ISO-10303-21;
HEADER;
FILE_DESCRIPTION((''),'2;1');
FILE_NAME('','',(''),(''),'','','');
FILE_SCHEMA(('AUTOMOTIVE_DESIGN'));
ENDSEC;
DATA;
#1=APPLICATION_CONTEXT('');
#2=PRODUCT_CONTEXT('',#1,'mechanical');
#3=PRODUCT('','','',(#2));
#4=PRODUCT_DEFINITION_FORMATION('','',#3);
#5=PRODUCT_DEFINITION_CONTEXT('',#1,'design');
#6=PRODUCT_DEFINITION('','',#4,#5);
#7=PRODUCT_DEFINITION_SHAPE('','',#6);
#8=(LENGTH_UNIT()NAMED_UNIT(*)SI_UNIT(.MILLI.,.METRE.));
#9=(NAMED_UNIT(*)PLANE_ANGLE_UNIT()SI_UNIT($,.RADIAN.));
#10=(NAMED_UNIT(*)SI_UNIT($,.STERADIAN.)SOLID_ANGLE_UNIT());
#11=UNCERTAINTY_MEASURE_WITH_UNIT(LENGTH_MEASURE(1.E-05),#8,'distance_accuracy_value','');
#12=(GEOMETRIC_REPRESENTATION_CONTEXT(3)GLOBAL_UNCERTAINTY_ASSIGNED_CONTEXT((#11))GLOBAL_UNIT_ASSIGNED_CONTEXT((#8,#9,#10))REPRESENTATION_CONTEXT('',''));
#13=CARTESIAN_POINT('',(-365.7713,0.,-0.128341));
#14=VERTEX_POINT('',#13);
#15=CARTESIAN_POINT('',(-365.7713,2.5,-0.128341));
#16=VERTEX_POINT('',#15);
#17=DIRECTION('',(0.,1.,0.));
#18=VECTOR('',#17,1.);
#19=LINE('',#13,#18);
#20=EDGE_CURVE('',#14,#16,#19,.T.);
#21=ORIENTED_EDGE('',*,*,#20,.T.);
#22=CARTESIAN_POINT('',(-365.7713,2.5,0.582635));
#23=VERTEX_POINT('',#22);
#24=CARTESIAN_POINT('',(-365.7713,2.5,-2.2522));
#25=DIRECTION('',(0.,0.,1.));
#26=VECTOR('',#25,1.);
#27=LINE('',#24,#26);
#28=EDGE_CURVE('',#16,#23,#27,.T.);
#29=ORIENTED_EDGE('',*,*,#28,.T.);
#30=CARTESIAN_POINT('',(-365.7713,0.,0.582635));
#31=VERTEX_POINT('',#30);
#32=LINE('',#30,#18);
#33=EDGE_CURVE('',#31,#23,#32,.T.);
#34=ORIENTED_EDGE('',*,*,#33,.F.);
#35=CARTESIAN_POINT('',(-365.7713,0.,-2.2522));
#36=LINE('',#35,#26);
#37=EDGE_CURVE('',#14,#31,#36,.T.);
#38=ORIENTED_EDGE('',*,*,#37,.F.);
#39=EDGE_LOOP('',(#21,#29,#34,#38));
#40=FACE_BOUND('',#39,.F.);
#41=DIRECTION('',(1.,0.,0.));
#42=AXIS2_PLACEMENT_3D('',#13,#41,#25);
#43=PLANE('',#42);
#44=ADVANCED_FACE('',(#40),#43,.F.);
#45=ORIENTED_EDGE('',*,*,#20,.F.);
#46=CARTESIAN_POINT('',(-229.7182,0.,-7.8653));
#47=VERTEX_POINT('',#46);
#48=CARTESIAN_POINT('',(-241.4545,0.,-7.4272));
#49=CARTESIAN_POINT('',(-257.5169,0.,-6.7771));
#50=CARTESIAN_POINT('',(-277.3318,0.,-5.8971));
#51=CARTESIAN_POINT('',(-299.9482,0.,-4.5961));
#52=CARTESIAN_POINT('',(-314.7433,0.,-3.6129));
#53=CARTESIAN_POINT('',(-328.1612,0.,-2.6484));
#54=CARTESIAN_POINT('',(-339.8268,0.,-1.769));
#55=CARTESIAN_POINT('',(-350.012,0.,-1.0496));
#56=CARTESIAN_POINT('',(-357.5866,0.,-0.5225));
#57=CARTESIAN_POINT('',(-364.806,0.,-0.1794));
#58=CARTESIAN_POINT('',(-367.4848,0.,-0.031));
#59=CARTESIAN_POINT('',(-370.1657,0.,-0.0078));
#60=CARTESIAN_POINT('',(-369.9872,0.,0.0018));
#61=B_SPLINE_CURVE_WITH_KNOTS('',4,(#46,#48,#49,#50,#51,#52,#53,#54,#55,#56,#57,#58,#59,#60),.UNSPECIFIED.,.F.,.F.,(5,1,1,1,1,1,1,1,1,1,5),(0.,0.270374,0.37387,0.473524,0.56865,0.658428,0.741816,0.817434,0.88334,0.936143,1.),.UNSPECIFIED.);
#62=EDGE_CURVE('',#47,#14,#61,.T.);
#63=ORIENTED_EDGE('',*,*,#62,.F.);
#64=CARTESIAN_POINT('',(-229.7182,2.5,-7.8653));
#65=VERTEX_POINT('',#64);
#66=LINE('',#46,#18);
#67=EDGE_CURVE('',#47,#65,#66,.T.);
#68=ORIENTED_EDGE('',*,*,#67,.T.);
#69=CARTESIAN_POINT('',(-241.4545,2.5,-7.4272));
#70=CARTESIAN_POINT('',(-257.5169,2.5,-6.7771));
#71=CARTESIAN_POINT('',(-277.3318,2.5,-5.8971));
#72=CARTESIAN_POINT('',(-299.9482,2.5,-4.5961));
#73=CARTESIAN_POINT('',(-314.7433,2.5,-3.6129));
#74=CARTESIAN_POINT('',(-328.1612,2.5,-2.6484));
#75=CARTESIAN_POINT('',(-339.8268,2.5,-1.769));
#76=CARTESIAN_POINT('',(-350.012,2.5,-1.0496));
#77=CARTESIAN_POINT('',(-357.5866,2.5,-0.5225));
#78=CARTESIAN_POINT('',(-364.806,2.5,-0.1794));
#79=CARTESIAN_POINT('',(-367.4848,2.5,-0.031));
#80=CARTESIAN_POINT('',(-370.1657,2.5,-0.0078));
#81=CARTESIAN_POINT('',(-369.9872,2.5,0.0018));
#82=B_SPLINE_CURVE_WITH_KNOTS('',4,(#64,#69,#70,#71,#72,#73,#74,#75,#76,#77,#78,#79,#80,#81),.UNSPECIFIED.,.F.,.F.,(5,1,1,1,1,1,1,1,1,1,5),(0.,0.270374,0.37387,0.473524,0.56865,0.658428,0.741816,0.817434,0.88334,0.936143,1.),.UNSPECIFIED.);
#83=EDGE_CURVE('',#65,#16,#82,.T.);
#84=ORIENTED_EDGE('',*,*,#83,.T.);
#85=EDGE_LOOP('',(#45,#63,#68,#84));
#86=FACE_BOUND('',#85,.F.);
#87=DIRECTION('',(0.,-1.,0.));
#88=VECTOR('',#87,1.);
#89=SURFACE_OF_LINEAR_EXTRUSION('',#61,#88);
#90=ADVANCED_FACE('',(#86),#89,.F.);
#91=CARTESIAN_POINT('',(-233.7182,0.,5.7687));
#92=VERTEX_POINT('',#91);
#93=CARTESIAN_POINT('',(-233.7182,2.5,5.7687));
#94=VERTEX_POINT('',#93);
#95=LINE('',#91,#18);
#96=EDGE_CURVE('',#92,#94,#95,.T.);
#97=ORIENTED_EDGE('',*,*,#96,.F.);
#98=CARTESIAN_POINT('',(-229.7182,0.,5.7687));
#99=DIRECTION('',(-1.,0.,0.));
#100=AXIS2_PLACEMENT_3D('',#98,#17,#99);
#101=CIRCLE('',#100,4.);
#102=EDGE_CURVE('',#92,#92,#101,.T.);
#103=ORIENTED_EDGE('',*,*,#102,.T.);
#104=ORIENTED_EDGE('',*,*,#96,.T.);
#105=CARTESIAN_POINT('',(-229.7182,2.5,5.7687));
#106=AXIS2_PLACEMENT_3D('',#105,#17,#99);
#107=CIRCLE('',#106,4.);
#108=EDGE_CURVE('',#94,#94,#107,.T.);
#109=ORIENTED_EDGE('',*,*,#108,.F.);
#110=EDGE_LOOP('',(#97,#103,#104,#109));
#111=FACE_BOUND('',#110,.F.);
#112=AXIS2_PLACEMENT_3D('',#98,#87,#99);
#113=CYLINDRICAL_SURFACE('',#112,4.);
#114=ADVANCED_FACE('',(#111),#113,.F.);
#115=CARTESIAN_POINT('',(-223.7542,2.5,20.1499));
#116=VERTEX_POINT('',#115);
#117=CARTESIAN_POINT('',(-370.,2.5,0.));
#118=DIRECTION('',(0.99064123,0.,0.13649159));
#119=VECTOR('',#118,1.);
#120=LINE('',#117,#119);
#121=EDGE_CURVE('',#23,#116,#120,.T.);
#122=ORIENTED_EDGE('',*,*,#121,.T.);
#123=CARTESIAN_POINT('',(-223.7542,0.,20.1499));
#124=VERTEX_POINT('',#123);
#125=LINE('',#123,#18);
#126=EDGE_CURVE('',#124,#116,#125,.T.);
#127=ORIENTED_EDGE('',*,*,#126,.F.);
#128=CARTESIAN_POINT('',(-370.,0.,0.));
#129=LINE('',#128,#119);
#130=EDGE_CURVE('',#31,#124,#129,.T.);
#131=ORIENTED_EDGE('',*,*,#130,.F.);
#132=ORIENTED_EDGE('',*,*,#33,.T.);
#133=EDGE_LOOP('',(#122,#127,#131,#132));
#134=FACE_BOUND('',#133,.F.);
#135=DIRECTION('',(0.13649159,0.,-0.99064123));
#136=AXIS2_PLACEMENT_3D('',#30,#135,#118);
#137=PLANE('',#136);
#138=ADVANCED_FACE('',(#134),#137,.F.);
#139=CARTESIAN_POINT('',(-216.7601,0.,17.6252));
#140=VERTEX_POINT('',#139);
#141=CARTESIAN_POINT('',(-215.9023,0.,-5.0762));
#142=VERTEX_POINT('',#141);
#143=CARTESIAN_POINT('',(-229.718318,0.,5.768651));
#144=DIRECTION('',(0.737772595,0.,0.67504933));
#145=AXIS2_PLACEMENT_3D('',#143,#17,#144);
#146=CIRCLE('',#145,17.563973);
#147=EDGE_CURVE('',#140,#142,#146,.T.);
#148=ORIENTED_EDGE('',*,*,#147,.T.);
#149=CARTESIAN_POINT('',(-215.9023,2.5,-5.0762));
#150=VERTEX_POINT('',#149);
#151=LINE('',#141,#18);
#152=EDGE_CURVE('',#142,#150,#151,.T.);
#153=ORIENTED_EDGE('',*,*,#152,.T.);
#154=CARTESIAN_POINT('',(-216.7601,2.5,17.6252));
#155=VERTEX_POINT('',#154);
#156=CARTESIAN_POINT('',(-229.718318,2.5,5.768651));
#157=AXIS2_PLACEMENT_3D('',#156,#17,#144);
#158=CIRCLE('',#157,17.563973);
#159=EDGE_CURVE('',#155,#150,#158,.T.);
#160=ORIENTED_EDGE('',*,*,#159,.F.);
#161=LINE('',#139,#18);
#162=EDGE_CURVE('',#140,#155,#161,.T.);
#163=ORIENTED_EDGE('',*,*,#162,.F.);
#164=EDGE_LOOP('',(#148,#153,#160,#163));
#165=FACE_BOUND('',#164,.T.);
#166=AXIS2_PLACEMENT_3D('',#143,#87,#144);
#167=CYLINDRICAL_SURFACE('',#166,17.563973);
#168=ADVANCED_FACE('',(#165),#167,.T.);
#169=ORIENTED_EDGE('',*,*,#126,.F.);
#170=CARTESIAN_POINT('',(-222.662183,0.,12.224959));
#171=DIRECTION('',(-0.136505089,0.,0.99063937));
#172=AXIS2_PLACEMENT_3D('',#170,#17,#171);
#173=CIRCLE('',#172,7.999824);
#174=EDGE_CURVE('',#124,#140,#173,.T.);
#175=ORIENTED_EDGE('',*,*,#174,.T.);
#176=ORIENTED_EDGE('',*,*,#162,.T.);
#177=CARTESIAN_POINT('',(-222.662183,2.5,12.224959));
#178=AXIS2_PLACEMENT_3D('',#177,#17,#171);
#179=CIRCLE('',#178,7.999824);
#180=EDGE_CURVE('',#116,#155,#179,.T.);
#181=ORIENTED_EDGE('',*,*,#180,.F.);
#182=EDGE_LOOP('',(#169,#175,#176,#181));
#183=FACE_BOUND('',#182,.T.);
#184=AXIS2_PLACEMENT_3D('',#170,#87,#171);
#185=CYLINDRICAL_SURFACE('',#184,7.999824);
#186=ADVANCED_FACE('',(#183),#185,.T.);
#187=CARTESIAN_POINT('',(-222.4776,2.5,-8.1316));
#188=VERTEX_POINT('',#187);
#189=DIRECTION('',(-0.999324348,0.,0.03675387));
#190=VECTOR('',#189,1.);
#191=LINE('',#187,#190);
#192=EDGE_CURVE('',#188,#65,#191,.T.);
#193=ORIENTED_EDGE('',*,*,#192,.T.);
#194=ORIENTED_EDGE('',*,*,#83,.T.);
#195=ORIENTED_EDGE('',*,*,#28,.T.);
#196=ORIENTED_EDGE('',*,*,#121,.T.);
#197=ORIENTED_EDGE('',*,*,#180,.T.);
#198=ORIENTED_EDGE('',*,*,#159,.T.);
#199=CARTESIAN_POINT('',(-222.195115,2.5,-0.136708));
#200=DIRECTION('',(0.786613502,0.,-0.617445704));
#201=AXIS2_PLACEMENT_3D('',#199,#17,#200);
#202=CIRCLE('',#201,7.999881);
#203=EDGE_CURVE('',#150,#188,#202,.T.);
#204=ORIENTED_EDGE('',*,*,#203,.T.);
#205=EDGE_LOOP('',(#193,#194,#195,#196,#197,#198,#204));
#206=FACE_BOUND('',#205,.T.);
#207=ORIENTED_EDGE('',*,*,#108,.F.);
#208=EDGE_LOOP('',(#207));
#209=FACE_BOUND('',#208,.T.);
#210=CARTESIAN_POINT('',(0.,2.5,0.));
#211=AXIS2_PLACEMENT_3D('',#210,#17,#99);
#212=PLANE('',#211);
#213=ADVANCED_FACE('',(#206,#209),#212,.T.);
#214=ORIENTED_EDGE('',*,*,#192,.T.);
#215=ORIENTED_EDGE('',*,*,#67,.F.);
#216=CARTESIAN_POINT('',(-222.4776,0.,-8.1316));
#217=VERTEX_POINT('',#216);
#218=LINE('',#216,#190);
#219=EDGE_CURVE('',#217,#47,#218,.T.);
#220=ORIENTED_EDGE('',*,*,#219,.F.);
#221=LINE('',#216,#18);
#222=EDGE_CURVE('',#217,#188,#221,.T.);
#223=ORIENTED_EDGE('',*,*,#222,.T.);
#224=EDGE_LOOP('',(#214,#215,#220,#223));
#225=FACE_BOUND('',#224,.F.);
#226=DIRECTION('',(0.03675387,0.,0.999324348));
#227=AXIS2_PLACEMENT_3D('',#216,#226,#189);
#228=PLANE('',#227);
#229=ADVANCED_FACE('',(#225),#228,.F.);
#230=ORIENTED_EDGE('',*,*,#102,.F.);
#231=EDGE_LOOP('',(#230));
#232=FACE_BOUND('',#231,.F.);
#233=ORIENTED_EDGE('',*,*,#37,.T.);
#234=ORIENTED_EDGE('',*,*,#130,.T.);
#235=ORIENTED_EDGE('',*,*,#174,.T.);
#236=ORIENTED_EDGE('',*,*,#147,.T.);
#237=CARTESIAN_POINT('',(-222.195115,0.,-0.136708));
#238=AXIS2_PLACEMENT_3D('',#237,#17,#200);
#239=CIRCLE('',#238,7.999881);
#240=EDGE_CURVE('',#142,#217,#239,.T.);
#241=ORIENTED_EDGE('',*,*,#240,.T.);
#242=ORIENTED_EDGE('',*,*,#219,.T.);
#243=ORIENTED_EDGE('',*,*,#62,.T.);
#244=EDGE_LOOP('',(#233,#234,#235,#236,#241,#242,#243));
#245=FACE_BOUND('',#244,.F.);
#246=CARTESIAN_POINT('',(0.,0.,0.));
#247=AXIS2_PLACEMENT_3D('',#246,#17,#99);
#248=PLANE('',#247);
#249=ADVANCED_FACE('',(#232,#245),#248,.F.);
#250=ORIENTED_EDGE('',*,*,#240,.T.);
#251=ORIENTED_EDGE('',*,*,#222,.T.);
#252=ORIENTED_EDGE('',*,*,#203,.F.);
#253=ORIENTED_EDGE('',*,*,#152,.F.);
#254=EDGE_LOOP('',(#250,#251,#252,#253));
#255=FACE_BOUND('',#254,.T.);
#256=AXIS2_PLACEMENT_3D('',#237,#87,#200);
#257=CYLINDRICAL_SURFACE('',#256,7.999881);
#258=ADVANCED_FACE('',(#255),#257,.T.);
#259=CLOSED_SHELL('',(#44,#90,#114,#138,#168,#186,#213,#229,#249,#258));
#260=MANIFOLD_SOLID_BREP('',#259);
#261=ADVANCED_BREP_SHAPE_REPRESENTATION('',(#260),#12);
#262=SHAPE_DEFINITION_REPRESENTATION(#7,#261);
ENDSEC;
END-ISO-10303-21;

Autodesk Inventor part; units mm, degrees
ref_plane "YZ Plane" through (0, 0, 0) normal (1, 0, 0) x (0, 1, 0)
ref_plane "XZ Plane" through (0, 0, 0) normal (0, 1, 0) x (-1, 0, 0)
ref_plane "XY Plane" through (0, 0, 0) normal (0, 0, 1) x (1, 0, 0)
sketch "Sketch1" plane through (0, 0, 0) normal (0, 1, 0) x (-1, 0, 0)
  arc A0 (210.1622, -7.2025) -> (309.6615, 148.1866) centre (370, 0) ccw construction
  line L0 (370, 0) -> (223.7542, 20.1499)
  circle A1 centre (211.4974, 21.8387) radius 160 construction
  circle A2 centre (369.9872, 0.0018) radius 3 construction
  line L1 (365.7713, 2.7478) -> (370.7713, 2.7478)
  line L2 (370.7713, 2.7478) -> (370.7713, -2.2522)
  line L3 (370.7713, -2.2522) -> (365.7713, -2.2522)
  line L4 (365.7713, -2.2522) -> (365.7713, 2.7478)
  arc A3 (216.7601, 17.6252) -> (215.9023, -5.0762) centre (229.7182, 5.7687) ccw
  circle A4 centre (229.7182, 5.7687) radius 11.5
  circle A5 centre (229.7182, 5.7687) radius 4
  spline S0 degree 4 poles (229.7182, -7.8653) (241.4545, -7.4272) (257.5169, -6.7771) (277.3318, -5.8971) (299.9482, -4.5961) (314.7433, -3.6129) (328.1612, -2.6484) (339.8268, -1.769) (350.012, -1.0496) (357.5866, -0.5225) (364.806, -0.1794) (367.4848, -0.031) (370.1657, -0.0078) (369.9872, 0.0018) knots 0 0 0 0 0 0.270374 0.37387 0.473524 0.56865 0.658428 0.741816 0.817434 0.88334 0.936143 1 1 1 1 1
  arc A6 (223.7542, 20.1499) -> (216.7601, 17.6252) centre (222.6622, 12.2248) ccw
  arc A7 (215.9023, -5.0762) -> (222.4776, -8.1316) centre (222.1952, -0.1366) ccw
  line L5 (222.4776, -8.1316) -> (229.7182, -7.8653)
  point P0 (370, 0)
  point P1 (210.0997, -8.5616)
  point P2 (267.1071, -6.3194)
  point P3 (284.4371, -5.4606)
  point P4 (300.619, -4.5258)
  point P5 (315.5184, -3.5432)
  point P6 (328.988, -2.5786)
  point P7 (340.8625, -1.7041)
  point P8 (350.9622, -0.9861)
  point P9 (359.0984, -0.4682)
  point P10 (365.0855, -0.1602)
  point P11 (368.7597, -0.0285)
  point P12 (368.4073, 0.2194)
  point P13 (365.7713, 0.5826)
  point P14 (220.3414, 20.6201)
  point P15 (365.7713, -0.1283)
  dimension "d5" = 160
  dimension "d25" = 6
  dimension "d26" = 5
  dimension "d27" = 5
  dimension "d41" = 23
  dimension "d60" = 8
  dimension "d65" = 8
extrude "Extrusion4" add sketch "Sketch1" along normal blind 2.5 contours S0 L5 A7 A3 A6 L0 L4 | A4
properties part number "airfoil blueprint"
